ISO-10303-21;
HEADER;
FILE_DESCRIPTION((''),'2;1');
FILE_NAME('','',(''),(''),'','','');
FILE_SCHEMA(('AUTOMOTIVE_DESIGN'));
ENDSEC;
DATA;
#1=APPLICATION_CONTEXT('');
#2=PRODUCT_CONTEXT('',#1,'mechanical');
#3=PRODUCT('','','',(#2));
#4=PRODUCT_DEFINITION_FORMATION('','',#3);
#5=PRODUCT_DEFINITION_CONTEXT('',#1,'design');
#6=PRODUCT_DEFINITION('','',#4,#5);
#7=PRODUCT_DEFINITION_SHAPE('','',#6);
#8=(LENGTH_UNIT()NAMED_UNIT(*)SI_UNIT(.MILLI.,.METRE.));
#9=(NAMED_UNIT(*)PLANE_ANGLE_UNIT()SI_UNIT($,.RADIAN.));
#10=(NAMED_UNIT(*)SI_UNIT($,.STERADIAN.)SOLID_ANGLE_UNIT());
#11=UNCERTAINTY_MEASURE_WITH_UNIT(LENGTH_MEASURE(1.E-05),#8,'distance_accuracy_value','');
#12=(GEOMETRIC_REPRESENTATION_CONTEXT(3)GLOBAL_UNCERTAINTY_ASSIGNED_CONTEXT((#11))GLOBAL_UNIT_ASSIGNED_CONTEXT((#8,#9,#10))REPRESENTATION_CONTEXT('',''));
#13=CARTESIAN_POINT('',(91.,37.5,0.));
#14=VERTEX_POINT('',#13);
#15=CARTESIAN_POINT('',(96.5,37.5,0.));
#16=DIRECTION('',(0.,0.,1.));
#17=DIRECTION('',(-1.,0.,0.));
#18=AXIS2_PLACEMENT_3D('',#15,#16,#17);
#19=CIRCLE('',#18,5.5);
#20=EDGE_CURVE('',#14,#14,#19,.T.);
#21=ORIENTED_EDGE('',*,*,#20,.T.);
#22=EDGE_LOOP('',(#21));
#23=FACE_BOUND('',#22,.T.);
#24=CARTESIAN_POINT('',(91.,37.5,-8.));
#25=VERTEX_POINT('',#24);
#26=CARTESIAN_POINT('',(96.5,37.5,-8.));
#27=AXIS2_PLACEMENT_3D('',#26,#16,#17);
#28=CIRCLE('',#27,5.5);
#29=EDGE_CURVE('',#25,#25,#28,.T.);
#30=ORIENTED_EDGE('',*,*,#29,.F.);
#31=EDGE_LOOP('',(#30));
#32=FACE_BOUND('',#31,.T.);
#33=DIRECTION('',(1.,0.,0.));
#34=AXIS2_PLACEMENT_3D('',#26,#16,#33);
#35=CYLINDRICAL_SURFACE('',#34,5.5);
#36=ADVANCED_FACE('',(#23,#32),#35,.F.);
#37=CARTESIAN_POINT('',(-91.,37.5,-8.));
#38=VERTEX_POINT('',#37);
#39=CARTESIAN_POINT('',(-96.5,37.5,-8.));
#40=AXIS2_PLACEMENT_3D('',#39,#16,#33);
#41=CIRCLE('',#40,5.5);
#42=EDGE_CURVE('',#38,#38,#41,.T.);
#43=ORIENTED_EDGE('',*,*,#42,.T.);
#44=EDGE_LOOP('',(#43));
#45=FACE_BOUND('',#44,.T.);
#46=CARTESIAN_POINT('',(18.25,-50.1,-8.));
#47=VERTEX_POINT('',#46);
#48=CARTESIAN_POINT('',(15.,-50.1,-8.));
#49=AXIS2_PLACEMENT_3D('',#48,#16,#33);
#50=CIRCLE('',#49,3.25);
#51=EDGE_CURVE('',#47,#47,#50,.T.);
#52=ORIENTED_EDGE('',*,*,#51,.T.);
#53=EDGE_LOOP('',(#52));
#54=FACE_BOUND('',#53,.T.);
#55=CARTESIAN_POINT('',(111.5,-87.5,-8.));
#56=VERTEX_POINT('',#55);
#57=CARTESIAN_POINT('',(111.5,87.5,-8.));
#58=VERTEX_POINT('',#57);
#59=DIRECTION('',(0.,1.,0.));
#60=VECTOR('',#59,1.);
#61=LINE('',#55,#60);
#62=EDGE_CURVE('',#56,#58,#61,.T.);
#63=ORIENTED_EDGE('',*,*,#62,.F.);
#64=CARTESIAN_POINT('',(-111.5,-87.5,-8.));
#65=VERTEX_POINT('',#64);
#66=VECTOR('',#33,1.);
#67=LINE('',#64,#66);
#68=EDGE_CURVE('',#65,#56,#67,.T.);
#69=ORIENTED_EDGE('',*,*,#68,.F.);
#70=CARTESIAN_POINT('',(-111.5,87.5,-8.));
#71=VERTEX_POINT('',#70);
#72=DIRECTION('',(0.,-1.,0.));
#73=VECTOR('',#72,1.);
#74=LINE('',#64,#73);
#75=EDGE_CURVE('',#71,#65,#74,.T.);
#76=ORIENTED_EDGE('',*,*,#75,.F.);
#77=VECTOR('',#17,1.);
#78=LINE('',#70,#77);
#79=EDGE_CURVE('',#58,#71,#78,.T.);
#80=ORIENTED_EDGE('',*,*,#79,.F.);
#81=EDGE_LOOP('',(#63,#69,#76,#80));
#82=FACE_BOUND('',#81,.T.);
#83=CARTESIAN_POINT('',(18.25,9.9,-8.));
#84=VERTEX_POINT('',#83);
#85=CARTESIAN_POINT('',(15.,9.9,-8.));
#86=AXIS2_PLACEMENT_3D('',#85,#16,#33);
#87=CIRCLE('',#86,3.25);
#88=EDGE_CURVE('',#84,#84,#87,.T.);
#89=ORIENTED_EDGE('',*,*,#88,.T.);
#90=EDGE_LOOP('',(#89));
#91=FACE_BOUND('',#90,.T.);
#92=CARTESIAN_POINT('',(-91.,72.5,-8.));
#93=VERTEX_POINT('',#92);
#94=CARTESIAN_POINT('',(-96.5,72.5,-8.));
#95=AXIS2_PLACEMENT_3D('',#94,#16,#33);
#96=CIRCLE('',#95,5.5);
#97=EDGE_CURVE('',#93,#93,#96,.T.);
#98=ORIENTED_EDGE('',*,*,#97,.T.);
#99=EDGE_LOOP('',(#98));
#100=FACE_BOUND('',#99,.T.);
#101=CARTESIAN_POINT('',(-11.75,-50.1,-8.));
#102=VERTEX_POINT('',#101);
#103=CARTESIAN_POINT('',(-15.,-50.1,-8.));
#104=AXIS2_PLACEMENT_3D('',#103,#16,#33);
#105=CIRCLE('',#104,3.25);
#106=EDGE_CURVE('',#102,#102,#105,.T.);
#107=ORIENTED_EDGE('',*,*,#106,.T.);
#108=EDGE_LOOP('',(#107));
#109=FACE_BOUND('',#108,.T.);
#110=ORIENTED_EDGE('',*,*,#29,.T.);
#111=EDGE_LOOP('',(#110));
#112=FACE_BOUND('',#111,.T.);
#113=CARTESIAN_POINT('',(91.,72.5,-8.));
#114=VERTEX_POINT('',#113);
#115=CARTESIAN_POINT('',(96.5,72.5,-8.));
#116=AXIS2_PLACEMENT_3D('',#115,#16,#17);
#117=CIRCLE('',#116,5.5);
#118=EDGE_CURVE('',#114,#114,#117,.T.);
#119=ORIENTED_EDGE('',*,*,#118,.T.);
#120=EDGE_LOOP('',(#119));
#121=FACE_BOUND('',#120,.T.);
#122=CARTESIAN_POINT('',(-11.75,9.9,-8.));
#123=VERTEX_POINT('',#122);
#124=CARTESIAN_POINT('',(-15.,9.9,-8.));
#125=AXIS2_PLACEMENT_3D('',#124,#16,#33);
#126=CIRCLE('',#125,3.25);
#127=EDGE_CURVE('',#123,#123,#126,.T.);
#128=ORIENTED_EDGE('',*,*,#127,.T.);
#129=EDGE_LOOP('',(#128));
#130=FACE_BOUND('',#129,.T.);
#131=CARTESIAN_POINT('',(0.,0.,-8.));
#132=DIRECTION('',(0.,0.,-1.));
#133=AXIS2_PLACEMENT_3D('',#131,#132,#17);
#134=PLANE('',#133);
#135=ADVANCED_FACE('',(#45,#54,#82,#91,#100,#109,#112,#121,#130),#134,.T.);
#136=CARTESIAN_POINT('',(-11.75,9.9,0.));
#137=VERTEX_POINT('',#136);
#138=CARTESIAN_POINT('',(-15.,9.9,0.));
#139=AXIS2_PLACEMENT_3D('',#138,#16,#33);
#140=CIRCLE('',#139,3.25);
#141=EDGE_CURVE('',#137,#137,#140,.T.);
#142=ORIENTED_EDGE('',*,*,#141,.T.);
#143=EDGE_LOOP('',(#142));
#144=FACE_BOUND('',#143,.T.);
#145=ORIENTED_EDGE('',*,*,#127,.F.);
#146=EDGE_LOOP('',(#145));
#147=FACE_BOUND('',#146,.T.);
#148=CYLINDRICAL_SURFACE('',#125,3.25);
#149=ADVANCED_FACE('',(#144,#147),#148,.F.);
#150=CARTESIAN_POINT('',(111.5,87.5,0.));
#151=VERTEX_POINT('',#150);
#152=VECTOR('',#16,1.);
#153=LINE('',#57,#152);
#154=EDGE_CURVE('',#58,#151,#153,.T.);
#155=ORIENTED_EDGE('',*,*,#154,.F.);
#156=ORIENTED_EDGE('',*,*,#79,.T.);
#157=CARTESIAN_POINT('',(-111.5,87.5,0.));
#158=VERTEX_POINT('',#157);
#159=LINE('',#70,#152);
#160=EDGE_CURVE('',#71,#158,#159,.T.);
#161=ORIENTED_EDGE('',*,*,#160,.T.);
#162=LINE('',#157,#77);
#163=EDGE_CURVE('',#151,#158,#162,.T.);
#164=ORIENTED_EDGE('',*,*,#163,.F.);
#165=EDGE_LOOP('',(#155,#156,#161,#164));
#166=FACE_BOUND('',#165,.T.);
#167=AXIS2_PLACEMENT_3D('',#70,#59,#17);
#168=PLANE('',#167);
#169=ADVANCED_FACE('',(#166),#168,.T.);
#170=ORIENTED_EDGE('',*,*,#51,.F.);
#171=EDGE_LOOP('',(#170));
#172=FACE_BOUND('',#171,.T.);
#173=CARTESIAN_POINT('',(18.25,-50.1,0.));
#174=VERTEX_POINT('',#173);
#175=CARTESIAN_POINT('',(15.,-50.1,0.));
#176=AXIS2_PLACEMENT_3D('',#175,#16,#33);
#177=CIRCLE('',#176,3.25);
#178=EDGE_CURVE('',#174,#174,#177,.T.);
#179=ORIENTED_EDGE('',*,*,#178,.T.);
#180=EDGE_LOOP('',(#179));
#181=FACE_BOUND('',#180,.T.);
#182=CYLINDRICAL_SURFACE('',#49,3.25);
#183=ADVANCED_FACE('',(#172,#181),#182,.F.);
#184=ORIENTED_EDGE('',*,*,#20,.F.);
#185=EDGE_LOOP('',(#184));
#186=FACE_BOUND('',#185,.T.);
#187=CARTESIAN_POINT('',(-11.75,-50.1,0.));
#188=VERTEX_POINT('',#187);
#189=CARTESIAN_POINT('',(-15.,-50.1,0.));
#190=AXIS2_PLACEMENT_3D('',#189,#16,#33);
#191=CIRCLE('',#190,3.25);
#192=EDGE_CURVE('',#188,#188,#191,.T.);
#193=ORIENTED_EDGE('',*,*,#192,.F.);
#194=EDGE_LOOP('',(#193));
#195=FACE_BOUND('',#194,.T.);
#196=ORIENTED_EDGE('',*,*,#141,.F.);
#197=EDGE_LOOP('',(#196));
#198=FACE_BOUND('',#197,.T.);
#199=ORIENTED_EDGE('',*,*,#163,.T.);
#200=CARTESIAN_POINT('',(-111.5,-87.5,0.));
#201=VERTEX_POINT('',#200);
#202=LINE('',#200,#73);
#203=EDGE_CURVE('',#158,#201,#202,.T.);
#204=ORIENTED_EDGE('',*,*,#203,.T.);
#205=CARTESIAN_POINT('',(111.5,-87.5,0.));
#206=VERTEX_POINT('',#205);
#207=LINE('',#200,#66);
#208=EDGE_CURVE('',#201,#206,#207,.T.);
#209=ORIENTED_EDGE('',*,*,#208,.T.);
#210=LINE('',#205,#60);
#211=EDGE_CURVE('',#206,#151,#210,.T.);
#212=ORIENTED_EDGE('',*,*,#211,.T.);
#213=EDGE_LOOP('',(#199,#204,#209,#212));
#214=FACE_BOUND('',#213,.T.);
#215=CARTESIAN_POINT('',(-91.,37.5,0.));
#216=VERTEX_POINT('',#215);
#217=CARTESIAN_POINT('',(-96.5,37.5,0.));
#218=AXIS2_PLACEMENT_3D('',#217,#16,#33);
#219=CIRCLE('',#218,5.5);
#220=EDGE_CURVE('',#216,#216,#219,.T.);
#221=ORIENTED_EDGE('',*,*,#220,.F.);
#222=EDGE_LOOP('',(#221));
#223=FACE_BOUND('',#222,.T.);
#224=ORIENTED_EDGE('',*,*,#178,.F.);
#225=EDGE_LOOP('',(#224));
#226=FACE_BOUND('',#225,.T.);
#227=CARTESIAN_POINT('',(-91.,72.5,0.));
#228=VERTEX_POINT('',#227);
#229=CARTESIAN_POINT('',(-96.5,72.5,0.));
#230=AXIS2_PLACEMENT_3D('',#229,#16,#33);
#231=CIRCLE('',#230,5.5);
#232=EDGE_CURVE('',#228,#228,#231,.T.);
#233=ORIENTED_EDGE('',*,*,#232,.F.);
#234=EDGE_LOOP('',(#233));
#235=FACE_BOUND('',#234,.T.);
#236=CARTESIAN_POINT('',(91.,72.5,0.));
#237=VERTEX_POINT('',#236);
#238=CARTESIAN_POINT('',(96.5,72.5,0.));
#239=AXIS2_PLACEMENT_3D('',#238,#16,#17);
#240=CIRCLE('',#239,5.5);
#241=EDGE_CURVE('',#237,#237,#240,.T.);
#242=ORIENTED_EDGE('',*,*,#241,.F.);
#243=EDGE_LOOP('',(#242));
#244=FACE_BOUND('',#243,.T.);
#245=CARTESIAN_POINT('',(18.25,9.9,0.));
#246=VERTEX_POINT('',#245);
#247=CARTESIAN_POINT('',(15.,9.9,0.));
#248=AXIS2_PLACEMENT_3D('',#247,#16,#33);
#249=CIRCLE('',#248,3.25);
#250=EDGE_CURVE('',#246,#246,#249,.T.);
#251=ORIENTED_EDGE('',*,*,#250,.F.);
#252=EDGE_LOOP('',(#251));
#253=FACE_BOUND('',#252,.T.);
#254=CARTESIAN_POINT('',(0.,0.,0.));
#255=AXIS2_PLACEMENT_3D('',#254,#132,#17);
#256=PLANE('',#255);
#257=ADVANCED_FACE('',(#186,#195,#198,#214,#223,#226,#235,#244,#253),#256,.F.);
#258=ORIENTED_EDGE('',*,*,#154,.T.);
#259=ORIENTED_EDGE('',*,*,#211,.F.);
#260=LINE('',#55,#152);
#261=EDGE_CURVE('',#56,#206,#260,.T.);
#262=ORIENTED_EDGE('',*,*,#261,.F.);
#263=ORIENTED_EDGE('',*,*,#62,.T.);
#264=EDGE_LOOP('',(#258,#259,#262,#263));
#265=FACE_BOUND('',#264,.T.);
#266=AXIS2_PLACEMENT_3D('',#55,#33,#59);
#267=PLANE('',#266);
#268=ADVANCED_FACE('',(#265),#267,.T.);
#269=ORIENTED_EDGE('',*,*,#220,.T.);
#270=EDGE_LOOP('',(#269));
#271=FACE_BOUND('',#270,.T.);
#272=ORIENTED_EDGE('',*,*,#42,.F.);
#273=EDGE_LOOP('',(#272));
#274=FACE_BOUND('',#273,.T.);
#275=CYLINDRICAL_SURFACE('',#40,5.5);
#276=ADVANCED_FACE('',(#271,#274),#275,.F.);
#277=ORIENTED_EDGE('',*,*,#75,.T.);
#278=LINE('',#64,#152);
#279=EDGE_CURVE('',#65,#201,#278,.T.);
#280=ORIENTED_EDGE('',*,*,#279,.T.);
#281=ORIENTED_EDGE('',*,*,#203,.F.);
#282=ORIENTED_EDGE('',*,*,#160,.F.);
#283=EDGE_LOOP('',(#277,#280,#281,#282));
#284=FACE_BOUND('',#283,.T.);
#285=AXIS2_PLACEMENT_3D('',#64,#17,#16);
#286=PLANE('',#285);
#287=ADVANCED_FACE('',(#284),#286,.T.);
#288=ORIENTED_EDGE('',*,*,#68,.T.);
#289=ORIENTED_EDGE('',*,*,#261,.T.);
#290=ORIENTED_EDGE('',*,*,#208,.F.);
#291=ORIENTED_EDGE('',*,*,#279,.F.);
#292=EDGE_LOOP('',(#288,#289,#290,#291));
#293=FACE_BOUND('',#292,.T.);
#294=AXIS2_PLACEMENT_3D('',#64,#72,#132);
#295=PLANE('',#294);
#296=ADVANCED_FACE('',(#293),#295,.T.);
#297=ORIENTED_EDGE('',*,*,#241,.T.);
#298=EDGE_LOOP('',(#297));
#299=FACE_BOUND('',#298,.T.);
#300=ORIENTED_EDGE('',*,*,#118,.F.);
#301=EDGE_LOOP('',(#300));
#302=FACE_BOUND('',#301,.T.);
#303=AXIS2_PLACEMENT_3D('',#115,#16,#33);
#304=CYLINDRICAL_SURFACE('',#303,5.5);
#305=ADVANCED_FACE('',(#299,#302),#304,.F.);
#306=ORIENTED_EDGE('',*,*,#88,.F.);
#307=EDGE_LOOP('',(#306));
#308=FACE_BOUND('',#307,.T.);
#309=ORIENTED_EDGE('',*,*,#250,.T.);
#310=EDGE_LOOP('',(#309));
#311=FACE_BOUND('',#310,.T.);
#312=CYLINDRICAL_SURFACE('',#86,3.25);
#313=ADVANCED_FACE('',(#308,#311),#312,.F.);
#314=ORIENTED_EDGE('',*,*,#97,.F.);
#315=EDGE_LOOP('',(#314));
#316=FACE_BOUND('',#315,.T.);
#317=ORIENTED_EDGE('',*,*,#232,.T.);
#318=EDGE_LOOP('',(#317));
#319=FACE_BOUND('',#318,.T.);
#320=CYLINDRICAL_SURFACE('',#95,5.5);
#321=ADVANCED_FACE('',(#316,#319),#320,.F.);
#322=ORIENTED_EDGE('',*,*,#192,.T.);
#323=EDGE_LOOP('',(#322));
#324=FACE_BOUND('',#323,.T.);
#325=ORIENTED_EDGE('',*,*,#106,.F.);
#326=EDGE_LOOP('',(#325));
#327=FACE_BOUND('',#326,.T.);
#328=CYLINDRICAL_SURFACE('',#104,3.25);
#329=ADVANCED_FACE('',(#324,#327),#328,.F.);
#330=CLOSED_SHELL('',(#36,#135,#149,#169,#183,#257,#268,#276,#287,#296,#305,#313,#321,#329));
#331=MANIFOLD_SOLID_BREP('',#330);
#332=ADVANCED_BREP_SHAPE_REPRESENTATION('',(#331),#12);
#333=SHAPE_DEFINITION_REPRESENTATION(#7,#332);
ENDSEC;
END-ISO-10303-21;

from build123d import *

# Parameters (mm, degrees)
SKETCH1_W          = 223
SKETCH1_H          = 175
SKETCH1_R          = 3.25
BASE_FLANGE1_DEPTH = 8
SKETCH2_R          = 5.5
CUT_EXTRUDE1_DEPTH = 142.959501267


# Sheet-metal steps are written as plain solids
with BuildPart() as part:
    # Sketch1 → Base-Flange1 (new body)
    with BuildSketch(Plane.XY):
        Rectangle(SKETCH1_W, SKETCH1_H)
        with Locations((15, 9.9)):
            Circle(SKETCH1_R, mode=Mode.SUBTRACT)
        with Locations((-15, 9.9)):
            Circle(SKETCH1_R, mode=Mode.SUBTRACT)
        with Locations((-15, -50.1)):
            Circle(SKETCH1_R, mode=Mode.SUBTRACT)
        with Locations((15, -50.1)):
            Circle(SKETCH1_R, mode=Mode.SUBTRACT)
    extrude(amount=-BASE_FLANGE1_DEPTH)

    # Sketch2 → Cut-Extrude1 (cut, through all)
    with BuildSketch(Plane.XY):
        with Locations((-96.5, 72.5)):
            Circle(SKETCH2_R)
        with Locations((-96.5, 37.5)):
            Circle(SKETCH2_R)
        with Locations(Location((96.5, 37.5, 0), (0, 0, 180))):
            Circle(SKETCH2_R)
        with Locations(Location((96.5, 72.5, 0), (0, 0, 180))):
            Circle(SKETCH2_R)
    extrude(amount=-CUT_EXTRUDE1_DEPTH, mode=Mode.SUBTRACT)


solid = part.part
